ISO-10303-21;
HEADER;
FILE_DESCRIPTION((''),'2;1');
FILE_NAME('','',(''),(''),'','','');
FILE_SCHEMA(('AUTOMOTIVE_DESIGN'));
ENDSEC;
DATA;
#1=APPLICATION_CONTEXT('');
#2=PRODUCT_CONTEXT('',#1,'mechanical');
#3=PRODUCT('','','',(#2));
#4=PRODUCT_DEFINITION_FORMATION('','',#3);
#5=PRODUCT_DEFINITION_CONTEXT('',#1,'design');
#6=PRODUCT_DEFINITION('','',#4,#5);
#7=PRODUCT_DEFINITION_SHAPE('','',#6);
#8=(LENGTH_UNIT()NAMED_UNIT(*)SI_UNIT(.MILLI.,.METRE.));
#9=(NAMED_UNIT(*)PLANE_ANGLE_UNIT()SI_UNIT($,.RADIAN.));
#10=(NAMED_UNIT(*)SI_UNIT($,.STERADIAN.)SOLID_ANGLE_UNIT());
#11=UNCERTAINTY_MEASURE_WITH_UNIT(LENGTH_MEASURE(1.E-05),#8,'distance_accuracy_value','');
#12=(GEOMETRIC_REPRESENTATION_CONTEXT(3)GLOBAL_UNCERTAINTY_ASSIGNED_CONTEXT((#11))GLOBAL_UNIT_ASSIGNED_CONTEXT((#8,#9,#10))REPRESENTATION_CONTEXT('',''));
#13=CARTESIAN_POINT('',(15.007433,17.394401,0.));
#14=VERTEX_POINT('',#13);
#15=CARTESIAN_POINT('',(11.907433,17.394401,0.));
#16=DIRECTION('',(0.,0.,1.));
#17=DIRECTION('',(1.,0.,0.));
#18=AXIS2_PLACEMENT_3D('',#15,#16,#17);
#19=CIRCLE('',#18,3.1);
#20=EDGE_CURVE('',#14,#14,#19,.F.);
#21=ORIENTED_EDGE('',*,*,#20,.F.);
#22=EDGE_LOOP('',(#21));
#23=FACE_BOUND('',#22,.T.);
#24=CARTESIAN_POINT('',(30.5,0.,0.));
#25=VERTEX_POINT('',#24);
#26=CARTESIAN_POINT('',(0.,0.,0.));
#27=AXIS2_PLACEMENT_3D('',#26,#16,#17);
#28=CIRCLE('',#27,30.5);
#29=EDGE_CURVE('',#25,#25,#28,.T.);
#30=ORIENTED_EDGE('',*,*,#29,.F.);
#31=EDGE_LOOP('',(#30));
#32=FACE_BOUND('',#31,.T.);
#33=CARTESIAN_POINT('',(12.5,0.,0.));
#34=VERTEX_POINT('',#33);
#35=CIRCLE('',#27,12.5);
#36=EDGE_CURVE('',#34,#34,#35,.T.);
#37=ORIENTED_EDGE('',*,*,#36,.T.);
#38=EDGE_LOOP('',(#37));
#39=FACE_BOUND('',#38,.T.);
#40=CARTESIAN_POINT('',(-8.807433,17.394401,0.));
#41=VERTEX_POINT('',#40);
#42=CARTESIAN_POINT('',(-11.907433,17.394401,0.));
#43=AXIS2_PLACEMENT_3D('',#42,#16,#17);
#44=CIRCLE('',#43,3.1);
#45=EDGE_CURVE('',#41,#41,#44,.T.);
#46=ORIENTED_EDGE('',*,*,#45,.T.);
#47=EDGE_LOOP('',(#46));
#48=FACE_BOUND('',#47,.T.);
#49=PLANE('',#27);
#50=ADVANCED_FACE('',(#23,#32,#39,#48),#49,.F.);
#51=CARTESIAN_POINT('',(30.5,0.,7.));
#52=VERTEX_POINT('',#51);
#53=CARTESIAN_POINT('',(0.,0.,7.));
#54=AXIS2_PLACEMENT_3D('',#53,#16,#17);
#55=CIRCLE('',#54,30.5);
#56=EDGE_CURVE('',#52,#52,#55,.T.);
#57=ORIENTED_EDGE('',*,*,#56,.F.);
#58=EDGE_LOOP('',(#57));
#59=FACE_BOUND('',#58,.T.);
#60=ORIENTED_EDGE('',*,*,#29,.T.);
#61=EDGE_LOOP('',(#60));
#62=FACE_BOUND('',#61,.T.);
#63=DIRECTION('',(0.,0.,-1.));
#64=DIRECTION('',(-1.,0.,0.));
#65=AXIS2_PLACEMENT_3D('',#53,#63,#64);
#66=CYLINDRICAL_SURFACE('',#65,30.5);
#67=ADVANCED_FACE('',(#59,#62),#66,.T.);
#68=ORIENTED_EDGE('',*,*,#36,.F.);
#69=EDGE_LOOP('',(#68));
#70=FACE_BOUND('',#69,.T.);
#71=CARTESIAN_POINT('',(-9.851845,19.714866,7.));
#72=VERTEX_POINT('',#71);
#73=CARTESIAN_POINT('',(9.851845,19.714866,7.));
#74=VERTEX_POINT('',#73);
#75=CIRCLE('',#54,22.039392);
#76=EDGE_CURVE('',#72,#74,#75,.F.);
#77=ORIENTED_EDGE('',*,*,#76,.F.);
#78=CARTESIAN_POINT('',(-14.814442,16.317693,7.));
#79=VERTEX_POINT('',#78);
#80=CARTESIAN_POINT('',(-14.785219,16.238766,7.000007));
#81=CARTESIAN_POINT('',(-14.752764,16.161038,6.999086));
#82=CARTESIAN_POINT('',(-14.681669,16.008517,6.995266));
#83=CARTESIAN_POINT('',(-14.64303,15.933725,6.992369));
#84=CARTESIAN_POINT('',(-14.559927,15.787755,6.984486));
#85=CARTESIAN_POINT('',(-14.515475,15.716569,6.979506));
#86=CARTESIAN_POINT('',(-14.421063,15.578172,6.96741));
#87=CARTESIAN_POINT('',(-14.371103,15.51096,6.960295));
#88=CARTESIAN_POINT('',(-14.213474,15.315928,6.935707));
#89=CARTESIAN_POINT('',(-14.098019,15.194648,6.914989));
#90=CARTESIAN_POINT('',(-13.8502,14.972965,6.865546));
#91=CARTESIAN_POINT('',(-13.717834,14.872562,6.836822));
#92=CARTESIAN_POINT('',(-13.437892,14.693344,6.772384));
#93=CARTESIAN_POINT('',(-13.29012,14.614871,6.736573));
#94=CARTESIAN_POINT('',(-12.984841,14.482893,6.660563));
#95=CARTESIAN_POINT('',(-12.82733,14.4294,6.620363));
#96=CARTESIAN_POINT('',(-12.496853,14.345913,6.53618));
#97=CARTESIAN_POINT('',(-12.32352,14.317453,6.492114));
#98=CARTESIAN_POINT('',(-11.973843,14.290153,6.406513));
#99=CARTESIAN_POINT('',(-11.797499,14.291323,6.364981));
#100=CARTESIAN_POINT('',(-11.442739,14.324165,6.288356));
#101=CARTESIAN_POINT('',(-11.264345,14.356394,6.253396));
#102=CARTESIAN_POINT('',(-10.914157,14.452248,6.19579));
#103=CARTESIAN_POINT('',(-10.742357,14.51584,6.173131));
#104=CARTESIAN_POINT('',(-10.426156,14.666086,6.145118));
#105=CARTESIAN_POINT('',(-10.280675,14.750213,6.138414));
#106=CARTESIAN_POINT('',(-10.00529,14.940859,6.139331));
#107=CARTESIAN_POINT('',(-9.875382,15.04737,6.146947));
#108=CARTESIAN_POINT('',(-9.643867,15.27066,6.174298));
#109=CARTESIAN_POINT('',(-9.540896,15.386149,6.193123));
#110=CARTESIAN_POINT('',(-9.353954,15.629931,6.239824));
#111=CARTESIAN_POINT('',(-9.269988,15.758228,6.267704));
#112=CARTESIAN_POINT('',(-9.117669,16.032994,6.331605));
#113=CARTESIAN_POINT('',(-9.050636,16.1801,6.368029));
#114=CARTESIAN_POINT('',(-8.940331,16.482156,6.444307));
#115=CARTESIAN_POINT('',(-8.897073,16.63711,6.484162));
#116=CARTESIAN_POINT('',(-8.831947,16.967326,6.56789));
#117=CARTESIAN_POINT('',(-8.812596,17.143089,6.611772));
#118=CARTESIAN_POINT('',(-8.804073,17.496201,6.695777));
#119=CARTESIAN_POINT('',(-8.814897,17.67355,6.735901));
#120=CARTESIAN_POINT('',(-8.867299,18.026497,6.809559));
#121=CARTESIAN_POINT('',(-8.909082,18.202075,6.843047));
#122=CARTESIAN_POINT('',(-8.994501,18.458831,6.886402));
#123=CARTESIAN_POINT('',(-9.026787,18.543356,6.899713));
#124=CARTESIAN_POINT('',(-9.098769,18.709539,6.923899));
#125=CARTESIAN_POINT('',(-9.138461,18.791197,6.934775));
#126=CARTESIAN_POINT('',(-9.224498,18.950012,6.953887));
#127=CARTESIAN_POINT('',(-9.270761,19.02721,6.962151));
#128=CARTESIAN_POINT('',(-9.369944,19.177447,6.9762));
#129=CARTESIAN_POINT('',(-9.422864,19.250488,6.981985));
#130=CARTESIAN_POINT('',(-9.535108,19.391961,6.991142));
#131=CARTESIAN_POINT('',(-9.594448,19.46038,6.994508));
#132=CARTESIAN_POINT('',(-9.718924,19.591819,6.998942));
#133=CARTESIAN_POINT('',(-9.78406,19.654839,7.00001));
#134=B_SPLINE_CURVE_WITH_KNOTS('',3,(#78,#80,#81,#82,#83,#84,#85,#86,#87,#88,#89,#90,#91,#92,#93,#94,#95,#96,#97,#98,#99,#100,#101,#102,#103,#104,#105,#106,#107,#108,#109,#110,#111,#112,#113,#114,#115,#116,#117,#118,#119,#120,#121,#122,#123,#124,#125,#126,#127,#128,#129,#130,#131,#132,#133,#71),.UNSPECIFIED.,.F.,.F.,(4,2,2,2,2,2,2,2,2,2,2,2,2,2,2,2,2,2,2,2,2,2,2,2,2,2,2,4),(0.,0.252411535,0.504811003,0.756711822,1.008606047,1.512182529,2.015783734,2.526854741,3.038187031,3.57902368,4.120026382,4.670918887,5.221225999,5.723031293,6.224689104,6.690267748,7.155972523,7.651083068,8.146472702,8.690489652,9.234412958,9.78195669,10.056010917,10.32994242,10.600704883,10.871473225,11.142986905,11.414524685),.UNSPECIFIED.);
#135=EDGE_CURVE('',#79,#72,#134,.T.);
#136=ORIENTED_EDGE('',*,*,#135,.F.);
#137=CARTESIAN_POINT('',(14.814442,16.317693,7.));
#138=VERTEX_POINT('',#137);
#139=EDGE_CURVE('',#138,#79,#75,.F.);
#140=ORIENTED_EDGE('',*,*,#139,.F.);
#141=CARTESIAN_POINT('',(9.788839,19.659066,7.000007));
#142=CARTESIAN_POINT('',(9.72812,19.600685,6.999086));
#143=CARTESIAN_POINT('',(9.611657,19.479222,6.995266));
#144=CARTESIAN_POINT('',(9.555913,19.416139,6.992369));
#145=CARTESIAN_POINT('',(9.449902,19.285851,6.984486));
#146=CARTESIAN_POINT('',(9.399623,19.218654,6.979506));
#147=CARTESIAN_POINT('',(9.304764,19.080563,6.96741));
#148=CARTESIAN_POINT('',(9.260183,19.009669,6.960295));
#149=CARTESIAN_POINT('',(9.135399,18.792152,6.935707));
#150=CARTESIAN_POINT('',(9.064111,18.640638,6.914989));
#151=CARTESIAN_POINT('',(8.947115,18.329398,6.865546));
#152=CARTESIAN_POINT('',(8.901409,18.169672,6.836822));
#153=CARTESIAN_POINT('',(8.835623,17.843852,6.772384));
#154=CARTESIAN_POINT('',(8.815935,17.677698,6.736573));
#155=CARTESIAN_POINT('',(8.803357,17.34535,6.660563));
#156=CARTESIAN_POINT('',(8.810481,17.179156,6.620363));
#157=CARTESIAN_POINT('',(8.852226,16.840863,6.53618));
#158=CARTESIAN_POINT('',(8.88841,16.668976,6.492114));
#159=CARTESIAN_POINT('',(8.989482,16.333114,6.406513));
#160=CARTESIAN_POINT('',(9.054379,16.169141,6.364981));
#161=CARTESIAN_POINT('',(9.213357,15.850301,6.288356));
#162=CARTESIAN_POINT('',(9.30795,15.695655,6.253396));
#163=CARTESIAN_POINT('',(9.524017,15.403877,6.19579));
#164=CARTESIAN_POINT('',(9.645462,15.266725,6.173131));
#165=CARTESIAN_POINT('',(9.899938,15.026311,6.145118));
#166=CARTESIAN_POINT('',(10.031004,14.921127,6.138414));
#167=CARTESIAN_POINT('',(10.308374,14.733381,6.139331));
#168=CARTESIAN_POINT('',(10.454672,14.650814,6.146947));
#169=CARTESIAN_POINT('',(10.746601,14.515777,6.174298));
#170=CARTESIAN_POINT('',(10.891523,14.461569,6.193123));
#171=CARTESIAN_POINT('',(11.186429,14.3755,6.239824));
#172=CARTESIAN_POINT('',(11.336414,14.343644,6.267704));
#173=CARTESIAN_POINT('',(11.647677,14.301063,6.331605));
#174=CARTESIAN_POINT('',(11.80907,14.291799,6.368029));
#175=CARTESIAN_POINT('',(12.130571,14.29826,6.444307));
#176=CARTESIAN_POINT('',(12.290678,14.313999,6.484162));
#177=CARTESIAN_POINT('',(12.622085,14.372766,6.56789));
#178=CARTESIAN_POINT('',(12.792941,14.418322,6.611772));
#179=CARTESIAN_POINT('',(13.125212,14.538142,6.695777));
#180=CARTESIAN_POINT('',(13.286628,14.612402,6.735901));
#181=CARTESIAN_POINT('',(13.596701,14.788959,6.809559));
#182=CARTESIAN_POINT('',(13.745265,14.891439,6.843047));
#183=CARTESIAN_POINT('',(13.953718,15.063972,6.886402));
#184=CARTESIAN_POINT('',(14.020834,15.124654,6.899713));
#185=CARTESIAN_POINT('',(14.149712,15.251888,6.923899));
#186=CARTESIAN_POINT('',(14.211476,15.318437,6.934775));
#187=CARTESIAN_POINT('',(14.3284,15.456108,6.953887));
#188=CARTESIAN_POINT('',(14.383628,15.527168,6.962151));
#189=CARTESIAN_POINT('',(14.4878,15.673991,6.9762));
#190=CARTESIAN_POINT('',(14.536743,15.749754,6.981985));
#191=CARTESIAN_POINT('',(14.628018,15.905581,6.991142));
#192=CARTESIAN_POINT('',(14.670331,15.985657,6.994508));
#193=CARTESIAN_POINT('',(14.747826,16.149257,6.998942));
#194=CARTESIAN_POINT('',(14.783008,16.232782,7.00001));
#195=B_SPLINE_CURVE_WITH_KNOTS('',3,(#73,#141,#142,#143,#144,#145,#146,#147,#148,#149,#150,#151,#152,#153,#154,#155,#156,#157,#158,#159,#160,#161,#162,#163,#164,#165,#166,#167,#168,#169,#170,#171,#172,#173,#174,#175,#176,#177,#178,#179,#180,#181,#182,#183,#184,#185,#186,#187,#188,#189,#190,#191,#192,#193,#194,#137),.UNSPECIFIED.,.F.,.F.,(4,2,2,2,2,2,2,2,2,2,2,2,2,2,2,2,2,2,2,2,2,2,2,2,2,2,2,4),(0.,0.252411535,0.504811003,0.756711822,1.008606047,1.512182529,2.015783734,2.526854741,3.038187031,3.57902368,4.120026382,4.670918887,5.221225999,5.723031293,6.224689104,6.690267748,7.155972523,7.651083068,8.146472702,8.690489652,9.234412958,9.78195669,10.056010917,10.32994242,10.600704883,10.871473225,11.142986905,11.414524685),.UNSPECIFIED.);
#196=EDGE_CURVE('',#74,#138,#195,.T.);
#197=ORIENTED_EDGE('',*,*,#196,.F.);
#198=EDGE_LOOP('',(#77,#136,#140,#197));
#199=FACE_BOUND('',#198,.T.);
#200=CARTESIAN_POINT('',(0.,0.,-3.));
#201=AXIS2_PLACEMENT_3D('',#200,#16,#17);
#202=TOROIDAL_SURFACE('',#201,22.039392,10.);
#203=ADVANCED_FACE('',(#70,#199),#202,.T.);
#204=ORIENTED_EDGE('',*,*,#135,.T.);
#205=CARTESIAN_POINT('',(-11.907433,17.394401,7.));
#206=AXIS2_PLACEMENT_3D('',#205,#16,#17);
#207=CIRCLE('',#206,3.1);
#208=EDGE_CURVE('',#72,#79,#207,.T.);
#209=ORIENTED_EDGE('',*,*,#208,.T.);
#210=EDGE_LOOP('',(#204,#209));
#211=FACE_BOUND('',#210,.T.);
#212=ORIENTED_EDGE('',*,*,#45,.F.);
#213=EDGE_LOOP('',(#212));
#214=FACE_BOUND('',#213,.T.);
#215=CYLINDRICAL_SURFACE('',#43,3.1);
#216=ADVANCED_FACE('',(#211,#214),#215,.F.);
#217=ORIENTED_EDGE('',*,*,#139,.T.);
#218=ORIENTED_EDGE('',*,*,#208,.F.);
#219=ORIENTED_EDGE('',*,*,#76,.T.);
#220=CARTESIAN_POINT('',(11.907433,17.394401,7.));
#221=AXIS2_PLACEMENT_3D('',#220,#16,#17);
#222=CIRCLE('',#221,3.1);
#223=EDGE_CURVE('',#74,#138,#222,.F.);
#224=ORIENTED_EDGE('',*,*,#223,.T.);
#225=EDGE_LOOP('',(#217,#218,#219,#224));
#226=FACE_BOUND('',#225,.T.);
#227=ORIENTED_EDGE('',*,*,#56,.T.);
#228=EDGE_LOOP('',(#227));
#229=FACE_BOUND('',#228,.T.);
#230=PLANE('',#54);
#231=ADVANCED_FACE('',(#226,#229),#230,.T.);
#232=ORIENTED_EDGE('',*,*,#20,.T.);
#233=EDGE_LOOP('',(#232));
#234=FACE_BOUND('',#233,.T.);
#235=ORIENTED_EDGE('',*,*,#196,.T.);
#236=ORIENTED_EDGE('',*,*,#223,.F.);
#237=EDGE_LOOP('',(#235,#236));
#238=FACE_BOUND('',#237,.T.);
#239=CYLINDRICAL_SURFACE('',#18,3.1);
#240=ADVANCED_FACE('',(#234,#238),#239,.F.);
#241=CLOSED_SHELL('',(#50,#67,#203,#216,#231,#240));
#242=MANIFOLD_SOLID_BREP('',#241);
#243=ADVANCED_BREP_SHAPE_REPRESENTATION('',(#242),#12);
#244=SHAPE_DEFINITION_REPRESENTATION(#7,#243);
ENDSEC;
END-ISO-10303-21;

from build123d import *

# Parameters (mm, degrees)
SKETCH1_R                        = 30.5
BOSS_EXTRUDE1_DEPTH              = 7
SKETCH2_R                        = 3.1
F_2X_6_2_MM_AND_25_MM_THRU_DEPTH = 44.697826033
F_10MM_FILET_R                   = 10


with BuildPart() as part:
    # Sketch1 → Boss-Extrude1 (new body)
    with BuildSketch(Plane(origin=(0, 0, 0), x_dir=(0, 1, 0), z_dir=(0, 0, 1))):
        with Locations(Location((0, 0, 0), (0, 0, 270))):
            Circle(SKETCH1_R)
    extrude(amount=BOSS_EXTRUDE1_DEPTH)

    # Sketch2 → 2x 6.2 mm and 25 mm thru (cut, through all)
    with BuildSketch(Plane.XY.offset(7)):
        with BuildLine():
            ThreePointArc((12.5, 0), (8.838834765, 8.838834765), (0, 12.5))
            Line((0, 12.5), (0, -12.5))
            ThreePointArc((0, -12.5), (8.838834765, -8.838834765), (12.5, 0))
        make_face()
        with BuildLine():
            Line((0, -12.5), (0, 12.5))
            ThreePointArc((0, 12.5), (-12.5, 0), (0, -12.5))
        make_face()
        with Locations((-11.907432919, 17.394401462)):
            Circle(SKETCH2_R)
        with Locations((11.907432919, 17.394401462)):
            Circle(SKETCH2_R)
    extrude(amount=-F_2X_6_2_MM_AND_25_MM_THRU_DEPTH, mode=Mode.SUBTRACT)

    # 10mm filet
    # the kernel refuses this fillet: 10 mm, written as the material it takes off along each edge
    with BuildSketch(Plane(origin=(0, 0, 7), x_dir=(0, -1, 0), z_dir=(1, 0, 0))) as f_10mm_filet_piece_1:
        with BuildLine():
            CenterArc((22.039392014, 10), F_10MM_FILET_R, 197.457603124, 72.542396876)
            Line((12.5, 7), (12.30921216, 6.94))
            ThreePointArc((12.30921216, 6.94), (12.3, 3.5), (12.3, 0))
            Line((12.3, 0), (12.5, -0.2))
            Line((12.5, -0.2), (22.039392014, -0.2))
            Line((22.039392014, -0.2), (22.039392014, 0))
        make_face()
    revolve(axis=Axis((0, 0, 7), (0, 0, -1)), mode=Mode.SUBTRACT)


solid = part.part
